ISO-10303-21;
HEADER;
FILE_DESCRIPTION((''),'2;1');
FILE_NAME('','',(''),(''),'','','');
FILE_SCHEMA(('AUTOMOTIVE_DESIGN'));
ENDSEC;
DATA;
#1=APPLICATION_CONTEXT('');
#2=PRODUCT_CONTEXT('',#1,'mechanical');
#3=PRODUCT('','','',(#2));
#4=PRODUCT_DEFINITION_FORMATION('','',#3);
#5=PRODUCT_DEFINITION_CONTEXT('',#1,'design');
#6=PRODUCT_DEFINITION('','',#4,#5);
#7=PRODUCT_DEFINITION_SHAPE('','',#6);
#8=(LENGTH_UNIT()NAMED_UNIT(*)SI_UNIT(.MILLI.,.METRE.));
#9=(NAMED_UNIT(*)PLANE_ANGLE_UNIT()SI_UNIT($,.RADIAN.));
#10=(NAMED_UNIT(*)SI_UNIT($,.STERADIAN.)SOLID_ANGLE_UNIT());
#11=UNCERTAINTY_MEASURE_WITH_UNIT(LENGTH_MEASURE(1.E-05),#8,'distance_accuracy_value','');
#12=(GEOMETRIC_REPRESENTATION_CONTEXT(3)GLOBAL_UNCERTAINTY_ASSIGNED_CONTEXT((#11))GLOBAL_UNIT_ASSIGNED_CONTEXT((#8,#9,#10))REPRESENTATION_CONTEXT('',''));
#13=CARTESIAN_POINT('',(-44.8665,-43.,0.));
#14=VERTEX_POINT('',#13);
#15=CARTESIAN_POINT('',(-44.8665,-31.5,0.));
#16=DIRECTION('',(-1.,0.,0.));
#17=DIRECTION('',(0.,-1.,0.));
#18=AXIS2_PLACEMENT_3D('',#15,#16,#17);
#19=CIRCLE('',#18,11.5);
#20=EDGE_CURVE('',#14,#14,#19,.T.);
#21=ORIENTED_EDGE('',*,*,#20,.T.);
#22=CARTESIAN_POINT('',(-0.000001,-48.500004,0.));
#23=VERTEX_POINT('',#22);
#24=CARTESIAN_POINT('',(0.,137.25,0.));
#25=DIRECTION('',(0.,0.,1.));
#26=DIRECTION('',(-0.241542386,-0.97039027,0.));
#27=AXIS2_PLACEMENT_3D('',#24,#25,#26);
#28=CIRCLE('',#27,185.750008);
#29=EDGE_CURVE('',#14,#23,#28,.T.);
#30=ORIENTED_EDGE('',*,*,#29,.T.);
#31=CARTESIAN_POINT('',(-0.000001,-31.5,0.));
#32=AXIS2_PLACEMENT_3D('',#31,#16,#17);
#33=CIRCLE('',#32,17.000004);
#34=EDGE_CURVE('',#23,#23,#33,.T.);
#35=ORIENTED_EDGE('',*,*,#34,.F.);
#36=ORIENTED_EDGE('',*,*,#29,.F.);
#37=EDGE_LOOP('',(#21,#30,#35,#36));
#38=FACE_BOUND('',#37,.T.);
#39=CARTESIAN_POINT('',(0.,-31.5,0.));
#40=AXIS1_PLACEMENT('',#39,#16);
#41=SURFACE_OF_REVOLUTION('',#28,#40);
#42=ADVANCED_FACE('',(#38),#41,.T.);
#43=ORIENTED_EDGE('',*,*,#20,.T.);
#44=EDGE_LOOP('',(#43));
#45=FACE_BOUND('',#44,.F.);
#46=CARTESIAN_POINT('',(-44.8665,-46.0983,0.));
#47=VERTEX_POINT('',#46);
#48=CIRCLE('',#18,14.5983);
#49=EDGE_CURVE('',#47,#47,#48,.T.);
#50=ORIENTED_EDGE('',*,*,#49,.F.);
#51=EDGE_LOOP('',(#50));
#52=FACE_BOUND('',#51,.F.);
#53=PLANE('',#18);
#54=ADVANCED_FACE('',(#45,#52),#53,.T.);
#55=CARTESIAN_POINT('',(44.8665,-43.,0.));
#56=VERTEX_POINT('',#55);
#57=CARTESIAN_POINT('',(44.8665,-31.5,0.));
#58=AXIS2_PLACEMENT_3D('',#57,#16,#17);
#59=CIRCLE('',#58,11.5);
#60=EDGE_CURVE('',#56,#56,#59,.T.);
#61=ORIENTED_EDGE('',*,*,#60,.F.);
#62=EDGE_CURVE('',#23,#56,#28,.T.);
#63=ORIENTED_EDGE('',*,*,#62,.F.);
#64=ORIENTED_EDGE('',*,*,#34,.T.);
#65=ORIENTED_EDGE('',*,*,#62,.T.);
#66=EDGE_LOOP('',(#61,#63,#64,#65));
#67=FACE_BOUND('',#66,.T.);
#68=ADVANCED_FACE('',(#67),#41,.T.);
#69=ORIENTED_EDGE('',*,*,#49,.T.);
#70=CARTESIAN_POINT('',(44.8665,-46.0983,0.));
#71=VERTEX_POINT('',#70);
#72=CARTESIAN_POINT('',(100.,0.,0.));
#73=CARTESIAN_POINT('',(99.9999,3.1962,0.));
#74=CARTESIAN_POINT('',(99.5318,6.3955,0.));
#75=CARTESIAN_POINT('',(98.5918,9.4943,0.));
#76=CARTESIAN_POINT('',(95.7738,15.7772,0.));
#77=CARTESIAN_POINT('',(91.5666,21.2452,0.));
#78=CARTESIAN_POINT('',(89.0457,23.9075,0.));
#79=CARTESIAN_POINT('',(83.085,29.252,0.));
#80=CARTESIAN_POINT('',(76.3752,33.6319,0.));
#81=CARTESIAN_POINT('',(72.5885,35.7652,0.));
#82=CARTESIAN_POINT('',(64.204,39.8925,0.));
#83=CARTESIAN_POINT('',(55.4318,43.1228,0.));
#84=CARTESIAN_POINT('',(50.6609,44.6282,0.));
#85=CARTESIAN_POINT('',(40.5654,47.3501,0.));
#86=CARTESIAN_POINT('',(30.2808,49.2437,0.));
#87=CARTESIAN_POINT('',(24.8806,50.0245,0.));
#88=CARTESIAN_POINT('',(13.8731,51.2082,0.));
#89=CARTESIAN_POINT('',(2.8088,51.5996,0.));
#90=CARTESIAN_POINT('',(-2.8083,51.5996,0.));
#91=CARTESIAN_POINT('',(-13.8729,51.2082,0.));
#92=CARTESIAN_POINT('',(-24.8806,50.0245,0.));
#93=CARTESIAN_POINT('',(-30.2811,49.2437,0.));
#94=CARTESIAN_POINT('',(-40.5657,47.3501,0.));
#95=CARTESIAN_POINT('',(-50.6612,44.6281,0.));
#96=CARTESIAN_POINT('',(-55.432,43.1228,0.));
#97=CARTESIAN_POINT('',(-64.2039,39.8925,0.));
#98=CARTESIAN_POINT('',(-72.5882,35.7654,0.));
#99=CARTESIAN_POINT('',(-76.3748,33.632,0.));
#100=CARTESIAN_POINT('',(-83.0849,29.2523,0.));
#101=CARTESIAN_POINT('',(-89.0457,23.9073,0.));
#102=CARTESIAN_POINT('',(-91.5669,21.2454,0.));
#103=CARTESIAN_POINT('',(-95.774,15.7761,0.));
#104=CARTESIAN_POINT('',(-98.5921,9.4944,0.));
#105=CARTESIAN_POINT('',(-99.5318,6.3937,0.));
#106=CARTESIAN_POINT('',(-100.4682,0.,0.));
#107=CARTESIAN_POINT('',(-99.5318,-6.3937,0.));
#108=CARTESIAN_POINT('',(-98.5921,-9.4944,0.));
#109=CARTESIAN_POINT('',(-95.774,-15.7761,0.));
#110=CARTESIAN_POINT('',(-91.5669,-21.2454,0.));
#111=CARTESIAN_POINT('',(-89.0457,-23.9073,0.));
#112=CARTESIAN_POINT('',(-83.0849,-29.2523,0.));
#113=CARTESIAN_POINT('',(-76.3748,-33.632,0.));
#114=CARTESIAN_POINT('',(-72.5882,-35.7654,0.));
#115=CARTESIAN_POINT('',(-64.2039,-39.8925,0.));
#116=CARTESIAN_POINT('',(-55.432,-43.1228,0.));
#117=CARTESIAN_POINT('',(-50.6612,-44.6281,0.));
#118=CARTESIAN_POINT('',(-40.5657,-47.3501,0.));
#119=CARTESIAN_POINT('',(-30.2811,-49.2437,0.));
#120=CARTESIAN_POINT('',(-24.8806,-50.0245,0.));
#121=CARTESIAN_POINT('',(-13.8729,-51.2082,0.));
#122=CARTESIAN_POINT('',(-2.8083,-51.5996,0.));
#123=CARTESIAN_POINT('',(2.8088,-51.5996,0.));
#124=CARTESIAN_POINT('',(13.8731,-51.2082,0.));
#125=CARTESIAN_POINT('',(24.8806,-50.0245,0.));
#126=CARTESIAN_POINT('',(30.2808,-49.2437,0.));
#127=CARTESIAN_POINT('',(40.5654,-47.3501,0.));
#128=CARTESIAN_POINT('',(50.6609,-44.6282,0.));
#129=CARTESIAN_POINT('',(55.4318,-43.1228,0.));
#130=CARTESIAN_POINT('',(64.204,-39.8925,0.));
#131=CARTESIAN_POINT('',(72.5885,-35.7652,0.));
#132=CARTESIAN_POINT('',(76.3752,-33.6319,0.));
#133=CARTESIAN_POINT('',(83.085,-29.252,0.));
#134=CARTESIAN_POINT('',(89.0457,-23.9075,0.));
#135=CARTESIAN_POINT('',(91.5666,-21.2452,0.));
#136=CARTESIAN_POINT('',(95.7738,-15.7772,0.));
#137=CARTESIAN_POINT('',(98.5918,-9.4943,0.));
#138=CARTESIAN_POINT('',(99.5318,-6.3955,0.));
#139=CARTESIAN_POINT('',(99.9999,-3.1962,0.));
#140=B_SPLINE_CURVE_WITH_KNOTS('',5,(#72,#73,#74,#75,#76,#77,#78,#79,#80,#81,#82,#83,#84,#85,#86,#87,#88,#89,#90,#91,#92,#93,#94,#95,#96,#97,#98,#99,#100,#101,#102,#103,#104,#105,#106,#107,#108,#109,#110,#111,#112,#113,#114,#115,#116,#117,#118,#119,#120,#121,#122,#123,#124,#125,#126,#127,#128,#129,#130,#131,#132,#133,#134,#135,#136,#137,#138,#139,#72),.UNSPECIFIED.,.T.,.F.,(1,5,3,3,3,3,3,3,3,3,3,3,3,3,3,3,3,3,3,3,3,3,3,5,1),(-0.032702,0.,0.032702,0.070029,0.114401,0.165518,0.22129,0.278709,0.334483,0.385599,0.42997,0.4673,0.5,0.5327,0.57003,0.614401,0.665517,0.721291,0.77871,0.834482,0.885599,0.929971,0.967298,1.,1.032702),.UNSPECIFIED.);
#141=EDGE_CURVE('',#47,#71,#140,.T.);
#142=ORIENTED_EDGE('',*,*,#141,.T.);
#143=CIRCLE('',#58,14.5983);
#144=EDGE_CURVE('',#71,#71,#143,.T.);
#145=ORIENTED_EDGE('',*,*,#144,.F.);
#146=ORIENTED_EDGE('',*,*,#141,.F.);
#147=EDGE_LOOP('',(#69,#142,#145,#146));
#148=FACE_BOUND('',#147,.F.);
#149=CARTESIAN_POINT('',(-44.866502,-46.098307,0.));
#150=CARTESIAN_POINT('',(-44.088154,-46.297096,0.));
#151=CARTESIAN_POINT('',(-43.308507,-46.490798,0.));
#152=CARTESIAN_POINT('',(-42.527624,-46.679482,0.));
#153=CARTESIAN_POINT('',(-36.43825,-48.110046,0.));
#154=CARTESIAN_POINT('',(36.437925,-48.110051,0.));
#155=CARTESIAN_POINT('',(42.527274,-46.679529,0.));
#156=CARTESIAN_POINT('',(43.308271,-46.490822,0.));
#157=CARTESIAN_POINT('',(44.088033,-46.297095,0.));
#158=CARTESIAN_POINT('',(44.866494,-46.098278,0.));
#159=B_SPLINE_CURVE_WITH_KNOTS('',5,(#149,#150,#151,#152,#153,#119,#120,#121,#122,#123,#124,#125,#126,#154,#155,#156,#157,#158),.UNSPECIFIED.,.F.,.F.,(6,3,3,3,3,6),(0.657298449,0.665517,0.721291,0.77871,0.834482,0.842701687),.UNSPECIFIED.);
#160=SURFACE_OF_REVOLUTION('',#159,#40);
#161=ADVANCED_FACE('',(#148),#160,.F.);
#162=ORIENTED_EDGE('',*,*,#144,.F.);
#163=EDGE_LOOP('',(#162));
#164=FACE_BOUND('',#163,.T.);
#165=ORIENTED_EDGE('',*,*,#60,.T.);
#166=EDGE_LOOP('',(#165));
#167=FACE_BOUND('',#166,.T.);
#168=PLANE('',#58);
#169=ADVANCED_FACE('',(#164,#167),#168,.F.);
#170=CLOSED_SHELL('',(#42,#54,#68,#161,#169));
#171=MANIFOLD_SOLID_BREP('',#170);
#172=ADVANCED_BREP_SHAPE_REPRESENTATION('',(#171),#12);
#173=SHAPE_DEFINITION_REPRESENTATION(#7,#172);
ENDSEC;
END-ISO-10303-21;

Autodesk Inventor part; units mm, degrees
ref_plane "YZ Plane" through (0, 0, 0) normal (1, 0, 0) x (0, 1, 0)
ref_plane "XZ Plane" through (0, 0, 0) normal (0, 1, 0) x (-1, 0, 0)
ref_plane "Work Plane1" through (0, 0, 0) normal (0, -0.8660254, 0.5) x (1, 0, 0)
sketch "Sketch1" plane through (0, 0, 0) normal (0, -0.8660254, 0.5) x (1, 0, 0)
  circle A0 centre (0, 0) radius 97 construction
  dimension "d1" = 194
sketch "Sketch2" plane through (0, 0, 0) normal (0, 1, 0) x (-1, 0, 0)
  point P0 (0, 0)
sketch "Sketch3" plane through (0, 0, 0) normal (0, 0, 1) x (1, 0, 0)
  ellipse E0 centre (0, 0) end of major axis (97, 0) minor radius 48.5 construction
  circle A0 centre (0, -31.5) radius 17
  line L0 (0, -31.5) -> (44.8665, -31.5)
  line L1 (0, -43) -> (44.8665, -43) construction
  line L2 (0, -31.5) -> (-44.8665, -31.5)
  line L3 (0, -43) -> (-44.8665, -43) construction
  line L4 (44.8665, -43) -> (44.8665, -31.5)
  line L5 (-44.8665, -43) -> (-44.8665, -31.5)
  arc A1 (-44.8665, -43) -> (44.8665, -43) centre (0, 137.25) ccw
  line L6 (-44.8665, -43) -> (-44.8665, -46.0983)
  line L7 (44.8665, -43) -> (44.8665, -46.0983)
  spline S0 degree 5 poles (100, 0) (99.9999, 3.1962) (99.5318, 6.3955) (98.5918, 9.4943) (95.7738, 15.7772) (91.5666, 21.2452) (89.0457, 23.9075) (83.085, 29.252) (76.3752, 33.6319) (72.5885, 35.7652) (64.204, 39.8925) (55.4318, 43.1228) (50.6609, 44.6282) (40.5654, 47.3501) (30.2808, 49.2437) (24.8806, 50.0245) (13.8731, 51.2082) (2.8088, 51.5996) (-2.8083, 51.5996) (-13.8729, 51.2082) (-24.8806, 50.0245) (-30.2811, 49.2437) (-40.5657, 47.3501) (-50.6612, 44.6281) (-55.432, 43.1228) (-64.2039, 39.8925) (-72.5882, 35.7654) (-76.3748, 33.632) (-83.0849, 29.2523) (-89.0457, 23.9073) (-91.5669, 21.2454) (-95.774, 15.7761) (-98.5921, 9.4944) (-99.5318, 6.3937) (-100.4682, 0) (-99.5318, -6.3937) (-98.5921, -9.4944) (-95.774, -15.7761) (-91.5669, -21.2454) (-89.0457, -23.9073) (-83.0849, -29.2523) (-76.3748, -33.632) (-72.5882, -35.7654) (-64.2039, -39.8925) (-55.432, -43.1228) (-50.6612, -44.6281) (-40.5657, -47.3501) (-30.2811, -49.2437) (-24.8806, -50.0245) (-13.8729, -51.2082) (-2.8083, -51.5996) (2.8088, -51.5996) (13.8731, -51.2082) (24.8806, -50.0245) (30.2808, -49.2437) (40.5654, -47.3501) (50.6609, -44.6282) (55.4318, -43.1228) (64.204, -39.8925) (72.5885, -35.7652) (76.3752, -33.6319) (83.085, -29.252) (89.0457, -23.9075) (91.5666, -21.2452) (95.7738, -15.7772) (98.5918, -9.4943) (99.5318, -6.3955) (99.9999, -3.1962) (100, 0) knots 0 0 0 0 0 0 0.032702 0.032702 0.032702 0.070029 0.070029 0.070029 0.114401 0.114401 0.114401 0.165518 0.165518 0.165518 0.22129 0.22129 0.22129 0.278709 0.278709 0.278709 0.334483 0.334483 0.334483 0.385599 0.385599 0.385599 0.42997 0.42997 0.42997 0.4673 0.4673 0.4673 0.5 0.5 0.5 0.5327 0.5327 0.5327 0.57003 0.57003 0.57003 0.614401 0.614401 0.614401 0.665517 0.665517 0.665517 0.721291 0.721291 0.721291 0.77871 0.77871 0.77871 0.834482 0.834482 0.834482 0.885599 0.885599 0.885599 0.929971 0.929971 0.929971 0.967298 0.967298 0.967298 1 1 1 1 1 1
  dimension "d13" = 3
  dimension "d3" = 11.5
revolve "Revolution1" [suppressed]
sketch "Sketch4" plane through (-44.8665, -31.5, 0) normal (-1, 0, 0) x (0, 0, 1)
  circle A0 centre (0, 0) radius 9.5
  point P0 (0, 31.5)
  dimension "d5" = 19
extrude "Extrusion1" [suppressed]
sketch "Sketch5" plane through (-38.8665, -31.5, 0) normal (-1, 0, 0) x (0, 0, 1)
  circle A0 centre (0, 0) radius 4
  point P0 (0, 31.5)
  dimension "d8" = 8
extrude "Extrusion2" [suppressed]
sketch "Sketch6" plane through (44.8665, -31.5, 0) normal (1, 0, 0) x (0, 0, -1)
  circle A0 centre (0, 0) radius 4 projected
  circle A1 centre (0, 0) radius 9.5
  point P0 (0, 31.5)
extrude "Extrusion3" [suppressed]
revolve "Revolution2" add sketch "Sketch3" angle 360 about axis through (0, -31.5, 0) along (-1, 0, 0) contours A1 L7 S0 L6
properties part number "roller rubber test"
